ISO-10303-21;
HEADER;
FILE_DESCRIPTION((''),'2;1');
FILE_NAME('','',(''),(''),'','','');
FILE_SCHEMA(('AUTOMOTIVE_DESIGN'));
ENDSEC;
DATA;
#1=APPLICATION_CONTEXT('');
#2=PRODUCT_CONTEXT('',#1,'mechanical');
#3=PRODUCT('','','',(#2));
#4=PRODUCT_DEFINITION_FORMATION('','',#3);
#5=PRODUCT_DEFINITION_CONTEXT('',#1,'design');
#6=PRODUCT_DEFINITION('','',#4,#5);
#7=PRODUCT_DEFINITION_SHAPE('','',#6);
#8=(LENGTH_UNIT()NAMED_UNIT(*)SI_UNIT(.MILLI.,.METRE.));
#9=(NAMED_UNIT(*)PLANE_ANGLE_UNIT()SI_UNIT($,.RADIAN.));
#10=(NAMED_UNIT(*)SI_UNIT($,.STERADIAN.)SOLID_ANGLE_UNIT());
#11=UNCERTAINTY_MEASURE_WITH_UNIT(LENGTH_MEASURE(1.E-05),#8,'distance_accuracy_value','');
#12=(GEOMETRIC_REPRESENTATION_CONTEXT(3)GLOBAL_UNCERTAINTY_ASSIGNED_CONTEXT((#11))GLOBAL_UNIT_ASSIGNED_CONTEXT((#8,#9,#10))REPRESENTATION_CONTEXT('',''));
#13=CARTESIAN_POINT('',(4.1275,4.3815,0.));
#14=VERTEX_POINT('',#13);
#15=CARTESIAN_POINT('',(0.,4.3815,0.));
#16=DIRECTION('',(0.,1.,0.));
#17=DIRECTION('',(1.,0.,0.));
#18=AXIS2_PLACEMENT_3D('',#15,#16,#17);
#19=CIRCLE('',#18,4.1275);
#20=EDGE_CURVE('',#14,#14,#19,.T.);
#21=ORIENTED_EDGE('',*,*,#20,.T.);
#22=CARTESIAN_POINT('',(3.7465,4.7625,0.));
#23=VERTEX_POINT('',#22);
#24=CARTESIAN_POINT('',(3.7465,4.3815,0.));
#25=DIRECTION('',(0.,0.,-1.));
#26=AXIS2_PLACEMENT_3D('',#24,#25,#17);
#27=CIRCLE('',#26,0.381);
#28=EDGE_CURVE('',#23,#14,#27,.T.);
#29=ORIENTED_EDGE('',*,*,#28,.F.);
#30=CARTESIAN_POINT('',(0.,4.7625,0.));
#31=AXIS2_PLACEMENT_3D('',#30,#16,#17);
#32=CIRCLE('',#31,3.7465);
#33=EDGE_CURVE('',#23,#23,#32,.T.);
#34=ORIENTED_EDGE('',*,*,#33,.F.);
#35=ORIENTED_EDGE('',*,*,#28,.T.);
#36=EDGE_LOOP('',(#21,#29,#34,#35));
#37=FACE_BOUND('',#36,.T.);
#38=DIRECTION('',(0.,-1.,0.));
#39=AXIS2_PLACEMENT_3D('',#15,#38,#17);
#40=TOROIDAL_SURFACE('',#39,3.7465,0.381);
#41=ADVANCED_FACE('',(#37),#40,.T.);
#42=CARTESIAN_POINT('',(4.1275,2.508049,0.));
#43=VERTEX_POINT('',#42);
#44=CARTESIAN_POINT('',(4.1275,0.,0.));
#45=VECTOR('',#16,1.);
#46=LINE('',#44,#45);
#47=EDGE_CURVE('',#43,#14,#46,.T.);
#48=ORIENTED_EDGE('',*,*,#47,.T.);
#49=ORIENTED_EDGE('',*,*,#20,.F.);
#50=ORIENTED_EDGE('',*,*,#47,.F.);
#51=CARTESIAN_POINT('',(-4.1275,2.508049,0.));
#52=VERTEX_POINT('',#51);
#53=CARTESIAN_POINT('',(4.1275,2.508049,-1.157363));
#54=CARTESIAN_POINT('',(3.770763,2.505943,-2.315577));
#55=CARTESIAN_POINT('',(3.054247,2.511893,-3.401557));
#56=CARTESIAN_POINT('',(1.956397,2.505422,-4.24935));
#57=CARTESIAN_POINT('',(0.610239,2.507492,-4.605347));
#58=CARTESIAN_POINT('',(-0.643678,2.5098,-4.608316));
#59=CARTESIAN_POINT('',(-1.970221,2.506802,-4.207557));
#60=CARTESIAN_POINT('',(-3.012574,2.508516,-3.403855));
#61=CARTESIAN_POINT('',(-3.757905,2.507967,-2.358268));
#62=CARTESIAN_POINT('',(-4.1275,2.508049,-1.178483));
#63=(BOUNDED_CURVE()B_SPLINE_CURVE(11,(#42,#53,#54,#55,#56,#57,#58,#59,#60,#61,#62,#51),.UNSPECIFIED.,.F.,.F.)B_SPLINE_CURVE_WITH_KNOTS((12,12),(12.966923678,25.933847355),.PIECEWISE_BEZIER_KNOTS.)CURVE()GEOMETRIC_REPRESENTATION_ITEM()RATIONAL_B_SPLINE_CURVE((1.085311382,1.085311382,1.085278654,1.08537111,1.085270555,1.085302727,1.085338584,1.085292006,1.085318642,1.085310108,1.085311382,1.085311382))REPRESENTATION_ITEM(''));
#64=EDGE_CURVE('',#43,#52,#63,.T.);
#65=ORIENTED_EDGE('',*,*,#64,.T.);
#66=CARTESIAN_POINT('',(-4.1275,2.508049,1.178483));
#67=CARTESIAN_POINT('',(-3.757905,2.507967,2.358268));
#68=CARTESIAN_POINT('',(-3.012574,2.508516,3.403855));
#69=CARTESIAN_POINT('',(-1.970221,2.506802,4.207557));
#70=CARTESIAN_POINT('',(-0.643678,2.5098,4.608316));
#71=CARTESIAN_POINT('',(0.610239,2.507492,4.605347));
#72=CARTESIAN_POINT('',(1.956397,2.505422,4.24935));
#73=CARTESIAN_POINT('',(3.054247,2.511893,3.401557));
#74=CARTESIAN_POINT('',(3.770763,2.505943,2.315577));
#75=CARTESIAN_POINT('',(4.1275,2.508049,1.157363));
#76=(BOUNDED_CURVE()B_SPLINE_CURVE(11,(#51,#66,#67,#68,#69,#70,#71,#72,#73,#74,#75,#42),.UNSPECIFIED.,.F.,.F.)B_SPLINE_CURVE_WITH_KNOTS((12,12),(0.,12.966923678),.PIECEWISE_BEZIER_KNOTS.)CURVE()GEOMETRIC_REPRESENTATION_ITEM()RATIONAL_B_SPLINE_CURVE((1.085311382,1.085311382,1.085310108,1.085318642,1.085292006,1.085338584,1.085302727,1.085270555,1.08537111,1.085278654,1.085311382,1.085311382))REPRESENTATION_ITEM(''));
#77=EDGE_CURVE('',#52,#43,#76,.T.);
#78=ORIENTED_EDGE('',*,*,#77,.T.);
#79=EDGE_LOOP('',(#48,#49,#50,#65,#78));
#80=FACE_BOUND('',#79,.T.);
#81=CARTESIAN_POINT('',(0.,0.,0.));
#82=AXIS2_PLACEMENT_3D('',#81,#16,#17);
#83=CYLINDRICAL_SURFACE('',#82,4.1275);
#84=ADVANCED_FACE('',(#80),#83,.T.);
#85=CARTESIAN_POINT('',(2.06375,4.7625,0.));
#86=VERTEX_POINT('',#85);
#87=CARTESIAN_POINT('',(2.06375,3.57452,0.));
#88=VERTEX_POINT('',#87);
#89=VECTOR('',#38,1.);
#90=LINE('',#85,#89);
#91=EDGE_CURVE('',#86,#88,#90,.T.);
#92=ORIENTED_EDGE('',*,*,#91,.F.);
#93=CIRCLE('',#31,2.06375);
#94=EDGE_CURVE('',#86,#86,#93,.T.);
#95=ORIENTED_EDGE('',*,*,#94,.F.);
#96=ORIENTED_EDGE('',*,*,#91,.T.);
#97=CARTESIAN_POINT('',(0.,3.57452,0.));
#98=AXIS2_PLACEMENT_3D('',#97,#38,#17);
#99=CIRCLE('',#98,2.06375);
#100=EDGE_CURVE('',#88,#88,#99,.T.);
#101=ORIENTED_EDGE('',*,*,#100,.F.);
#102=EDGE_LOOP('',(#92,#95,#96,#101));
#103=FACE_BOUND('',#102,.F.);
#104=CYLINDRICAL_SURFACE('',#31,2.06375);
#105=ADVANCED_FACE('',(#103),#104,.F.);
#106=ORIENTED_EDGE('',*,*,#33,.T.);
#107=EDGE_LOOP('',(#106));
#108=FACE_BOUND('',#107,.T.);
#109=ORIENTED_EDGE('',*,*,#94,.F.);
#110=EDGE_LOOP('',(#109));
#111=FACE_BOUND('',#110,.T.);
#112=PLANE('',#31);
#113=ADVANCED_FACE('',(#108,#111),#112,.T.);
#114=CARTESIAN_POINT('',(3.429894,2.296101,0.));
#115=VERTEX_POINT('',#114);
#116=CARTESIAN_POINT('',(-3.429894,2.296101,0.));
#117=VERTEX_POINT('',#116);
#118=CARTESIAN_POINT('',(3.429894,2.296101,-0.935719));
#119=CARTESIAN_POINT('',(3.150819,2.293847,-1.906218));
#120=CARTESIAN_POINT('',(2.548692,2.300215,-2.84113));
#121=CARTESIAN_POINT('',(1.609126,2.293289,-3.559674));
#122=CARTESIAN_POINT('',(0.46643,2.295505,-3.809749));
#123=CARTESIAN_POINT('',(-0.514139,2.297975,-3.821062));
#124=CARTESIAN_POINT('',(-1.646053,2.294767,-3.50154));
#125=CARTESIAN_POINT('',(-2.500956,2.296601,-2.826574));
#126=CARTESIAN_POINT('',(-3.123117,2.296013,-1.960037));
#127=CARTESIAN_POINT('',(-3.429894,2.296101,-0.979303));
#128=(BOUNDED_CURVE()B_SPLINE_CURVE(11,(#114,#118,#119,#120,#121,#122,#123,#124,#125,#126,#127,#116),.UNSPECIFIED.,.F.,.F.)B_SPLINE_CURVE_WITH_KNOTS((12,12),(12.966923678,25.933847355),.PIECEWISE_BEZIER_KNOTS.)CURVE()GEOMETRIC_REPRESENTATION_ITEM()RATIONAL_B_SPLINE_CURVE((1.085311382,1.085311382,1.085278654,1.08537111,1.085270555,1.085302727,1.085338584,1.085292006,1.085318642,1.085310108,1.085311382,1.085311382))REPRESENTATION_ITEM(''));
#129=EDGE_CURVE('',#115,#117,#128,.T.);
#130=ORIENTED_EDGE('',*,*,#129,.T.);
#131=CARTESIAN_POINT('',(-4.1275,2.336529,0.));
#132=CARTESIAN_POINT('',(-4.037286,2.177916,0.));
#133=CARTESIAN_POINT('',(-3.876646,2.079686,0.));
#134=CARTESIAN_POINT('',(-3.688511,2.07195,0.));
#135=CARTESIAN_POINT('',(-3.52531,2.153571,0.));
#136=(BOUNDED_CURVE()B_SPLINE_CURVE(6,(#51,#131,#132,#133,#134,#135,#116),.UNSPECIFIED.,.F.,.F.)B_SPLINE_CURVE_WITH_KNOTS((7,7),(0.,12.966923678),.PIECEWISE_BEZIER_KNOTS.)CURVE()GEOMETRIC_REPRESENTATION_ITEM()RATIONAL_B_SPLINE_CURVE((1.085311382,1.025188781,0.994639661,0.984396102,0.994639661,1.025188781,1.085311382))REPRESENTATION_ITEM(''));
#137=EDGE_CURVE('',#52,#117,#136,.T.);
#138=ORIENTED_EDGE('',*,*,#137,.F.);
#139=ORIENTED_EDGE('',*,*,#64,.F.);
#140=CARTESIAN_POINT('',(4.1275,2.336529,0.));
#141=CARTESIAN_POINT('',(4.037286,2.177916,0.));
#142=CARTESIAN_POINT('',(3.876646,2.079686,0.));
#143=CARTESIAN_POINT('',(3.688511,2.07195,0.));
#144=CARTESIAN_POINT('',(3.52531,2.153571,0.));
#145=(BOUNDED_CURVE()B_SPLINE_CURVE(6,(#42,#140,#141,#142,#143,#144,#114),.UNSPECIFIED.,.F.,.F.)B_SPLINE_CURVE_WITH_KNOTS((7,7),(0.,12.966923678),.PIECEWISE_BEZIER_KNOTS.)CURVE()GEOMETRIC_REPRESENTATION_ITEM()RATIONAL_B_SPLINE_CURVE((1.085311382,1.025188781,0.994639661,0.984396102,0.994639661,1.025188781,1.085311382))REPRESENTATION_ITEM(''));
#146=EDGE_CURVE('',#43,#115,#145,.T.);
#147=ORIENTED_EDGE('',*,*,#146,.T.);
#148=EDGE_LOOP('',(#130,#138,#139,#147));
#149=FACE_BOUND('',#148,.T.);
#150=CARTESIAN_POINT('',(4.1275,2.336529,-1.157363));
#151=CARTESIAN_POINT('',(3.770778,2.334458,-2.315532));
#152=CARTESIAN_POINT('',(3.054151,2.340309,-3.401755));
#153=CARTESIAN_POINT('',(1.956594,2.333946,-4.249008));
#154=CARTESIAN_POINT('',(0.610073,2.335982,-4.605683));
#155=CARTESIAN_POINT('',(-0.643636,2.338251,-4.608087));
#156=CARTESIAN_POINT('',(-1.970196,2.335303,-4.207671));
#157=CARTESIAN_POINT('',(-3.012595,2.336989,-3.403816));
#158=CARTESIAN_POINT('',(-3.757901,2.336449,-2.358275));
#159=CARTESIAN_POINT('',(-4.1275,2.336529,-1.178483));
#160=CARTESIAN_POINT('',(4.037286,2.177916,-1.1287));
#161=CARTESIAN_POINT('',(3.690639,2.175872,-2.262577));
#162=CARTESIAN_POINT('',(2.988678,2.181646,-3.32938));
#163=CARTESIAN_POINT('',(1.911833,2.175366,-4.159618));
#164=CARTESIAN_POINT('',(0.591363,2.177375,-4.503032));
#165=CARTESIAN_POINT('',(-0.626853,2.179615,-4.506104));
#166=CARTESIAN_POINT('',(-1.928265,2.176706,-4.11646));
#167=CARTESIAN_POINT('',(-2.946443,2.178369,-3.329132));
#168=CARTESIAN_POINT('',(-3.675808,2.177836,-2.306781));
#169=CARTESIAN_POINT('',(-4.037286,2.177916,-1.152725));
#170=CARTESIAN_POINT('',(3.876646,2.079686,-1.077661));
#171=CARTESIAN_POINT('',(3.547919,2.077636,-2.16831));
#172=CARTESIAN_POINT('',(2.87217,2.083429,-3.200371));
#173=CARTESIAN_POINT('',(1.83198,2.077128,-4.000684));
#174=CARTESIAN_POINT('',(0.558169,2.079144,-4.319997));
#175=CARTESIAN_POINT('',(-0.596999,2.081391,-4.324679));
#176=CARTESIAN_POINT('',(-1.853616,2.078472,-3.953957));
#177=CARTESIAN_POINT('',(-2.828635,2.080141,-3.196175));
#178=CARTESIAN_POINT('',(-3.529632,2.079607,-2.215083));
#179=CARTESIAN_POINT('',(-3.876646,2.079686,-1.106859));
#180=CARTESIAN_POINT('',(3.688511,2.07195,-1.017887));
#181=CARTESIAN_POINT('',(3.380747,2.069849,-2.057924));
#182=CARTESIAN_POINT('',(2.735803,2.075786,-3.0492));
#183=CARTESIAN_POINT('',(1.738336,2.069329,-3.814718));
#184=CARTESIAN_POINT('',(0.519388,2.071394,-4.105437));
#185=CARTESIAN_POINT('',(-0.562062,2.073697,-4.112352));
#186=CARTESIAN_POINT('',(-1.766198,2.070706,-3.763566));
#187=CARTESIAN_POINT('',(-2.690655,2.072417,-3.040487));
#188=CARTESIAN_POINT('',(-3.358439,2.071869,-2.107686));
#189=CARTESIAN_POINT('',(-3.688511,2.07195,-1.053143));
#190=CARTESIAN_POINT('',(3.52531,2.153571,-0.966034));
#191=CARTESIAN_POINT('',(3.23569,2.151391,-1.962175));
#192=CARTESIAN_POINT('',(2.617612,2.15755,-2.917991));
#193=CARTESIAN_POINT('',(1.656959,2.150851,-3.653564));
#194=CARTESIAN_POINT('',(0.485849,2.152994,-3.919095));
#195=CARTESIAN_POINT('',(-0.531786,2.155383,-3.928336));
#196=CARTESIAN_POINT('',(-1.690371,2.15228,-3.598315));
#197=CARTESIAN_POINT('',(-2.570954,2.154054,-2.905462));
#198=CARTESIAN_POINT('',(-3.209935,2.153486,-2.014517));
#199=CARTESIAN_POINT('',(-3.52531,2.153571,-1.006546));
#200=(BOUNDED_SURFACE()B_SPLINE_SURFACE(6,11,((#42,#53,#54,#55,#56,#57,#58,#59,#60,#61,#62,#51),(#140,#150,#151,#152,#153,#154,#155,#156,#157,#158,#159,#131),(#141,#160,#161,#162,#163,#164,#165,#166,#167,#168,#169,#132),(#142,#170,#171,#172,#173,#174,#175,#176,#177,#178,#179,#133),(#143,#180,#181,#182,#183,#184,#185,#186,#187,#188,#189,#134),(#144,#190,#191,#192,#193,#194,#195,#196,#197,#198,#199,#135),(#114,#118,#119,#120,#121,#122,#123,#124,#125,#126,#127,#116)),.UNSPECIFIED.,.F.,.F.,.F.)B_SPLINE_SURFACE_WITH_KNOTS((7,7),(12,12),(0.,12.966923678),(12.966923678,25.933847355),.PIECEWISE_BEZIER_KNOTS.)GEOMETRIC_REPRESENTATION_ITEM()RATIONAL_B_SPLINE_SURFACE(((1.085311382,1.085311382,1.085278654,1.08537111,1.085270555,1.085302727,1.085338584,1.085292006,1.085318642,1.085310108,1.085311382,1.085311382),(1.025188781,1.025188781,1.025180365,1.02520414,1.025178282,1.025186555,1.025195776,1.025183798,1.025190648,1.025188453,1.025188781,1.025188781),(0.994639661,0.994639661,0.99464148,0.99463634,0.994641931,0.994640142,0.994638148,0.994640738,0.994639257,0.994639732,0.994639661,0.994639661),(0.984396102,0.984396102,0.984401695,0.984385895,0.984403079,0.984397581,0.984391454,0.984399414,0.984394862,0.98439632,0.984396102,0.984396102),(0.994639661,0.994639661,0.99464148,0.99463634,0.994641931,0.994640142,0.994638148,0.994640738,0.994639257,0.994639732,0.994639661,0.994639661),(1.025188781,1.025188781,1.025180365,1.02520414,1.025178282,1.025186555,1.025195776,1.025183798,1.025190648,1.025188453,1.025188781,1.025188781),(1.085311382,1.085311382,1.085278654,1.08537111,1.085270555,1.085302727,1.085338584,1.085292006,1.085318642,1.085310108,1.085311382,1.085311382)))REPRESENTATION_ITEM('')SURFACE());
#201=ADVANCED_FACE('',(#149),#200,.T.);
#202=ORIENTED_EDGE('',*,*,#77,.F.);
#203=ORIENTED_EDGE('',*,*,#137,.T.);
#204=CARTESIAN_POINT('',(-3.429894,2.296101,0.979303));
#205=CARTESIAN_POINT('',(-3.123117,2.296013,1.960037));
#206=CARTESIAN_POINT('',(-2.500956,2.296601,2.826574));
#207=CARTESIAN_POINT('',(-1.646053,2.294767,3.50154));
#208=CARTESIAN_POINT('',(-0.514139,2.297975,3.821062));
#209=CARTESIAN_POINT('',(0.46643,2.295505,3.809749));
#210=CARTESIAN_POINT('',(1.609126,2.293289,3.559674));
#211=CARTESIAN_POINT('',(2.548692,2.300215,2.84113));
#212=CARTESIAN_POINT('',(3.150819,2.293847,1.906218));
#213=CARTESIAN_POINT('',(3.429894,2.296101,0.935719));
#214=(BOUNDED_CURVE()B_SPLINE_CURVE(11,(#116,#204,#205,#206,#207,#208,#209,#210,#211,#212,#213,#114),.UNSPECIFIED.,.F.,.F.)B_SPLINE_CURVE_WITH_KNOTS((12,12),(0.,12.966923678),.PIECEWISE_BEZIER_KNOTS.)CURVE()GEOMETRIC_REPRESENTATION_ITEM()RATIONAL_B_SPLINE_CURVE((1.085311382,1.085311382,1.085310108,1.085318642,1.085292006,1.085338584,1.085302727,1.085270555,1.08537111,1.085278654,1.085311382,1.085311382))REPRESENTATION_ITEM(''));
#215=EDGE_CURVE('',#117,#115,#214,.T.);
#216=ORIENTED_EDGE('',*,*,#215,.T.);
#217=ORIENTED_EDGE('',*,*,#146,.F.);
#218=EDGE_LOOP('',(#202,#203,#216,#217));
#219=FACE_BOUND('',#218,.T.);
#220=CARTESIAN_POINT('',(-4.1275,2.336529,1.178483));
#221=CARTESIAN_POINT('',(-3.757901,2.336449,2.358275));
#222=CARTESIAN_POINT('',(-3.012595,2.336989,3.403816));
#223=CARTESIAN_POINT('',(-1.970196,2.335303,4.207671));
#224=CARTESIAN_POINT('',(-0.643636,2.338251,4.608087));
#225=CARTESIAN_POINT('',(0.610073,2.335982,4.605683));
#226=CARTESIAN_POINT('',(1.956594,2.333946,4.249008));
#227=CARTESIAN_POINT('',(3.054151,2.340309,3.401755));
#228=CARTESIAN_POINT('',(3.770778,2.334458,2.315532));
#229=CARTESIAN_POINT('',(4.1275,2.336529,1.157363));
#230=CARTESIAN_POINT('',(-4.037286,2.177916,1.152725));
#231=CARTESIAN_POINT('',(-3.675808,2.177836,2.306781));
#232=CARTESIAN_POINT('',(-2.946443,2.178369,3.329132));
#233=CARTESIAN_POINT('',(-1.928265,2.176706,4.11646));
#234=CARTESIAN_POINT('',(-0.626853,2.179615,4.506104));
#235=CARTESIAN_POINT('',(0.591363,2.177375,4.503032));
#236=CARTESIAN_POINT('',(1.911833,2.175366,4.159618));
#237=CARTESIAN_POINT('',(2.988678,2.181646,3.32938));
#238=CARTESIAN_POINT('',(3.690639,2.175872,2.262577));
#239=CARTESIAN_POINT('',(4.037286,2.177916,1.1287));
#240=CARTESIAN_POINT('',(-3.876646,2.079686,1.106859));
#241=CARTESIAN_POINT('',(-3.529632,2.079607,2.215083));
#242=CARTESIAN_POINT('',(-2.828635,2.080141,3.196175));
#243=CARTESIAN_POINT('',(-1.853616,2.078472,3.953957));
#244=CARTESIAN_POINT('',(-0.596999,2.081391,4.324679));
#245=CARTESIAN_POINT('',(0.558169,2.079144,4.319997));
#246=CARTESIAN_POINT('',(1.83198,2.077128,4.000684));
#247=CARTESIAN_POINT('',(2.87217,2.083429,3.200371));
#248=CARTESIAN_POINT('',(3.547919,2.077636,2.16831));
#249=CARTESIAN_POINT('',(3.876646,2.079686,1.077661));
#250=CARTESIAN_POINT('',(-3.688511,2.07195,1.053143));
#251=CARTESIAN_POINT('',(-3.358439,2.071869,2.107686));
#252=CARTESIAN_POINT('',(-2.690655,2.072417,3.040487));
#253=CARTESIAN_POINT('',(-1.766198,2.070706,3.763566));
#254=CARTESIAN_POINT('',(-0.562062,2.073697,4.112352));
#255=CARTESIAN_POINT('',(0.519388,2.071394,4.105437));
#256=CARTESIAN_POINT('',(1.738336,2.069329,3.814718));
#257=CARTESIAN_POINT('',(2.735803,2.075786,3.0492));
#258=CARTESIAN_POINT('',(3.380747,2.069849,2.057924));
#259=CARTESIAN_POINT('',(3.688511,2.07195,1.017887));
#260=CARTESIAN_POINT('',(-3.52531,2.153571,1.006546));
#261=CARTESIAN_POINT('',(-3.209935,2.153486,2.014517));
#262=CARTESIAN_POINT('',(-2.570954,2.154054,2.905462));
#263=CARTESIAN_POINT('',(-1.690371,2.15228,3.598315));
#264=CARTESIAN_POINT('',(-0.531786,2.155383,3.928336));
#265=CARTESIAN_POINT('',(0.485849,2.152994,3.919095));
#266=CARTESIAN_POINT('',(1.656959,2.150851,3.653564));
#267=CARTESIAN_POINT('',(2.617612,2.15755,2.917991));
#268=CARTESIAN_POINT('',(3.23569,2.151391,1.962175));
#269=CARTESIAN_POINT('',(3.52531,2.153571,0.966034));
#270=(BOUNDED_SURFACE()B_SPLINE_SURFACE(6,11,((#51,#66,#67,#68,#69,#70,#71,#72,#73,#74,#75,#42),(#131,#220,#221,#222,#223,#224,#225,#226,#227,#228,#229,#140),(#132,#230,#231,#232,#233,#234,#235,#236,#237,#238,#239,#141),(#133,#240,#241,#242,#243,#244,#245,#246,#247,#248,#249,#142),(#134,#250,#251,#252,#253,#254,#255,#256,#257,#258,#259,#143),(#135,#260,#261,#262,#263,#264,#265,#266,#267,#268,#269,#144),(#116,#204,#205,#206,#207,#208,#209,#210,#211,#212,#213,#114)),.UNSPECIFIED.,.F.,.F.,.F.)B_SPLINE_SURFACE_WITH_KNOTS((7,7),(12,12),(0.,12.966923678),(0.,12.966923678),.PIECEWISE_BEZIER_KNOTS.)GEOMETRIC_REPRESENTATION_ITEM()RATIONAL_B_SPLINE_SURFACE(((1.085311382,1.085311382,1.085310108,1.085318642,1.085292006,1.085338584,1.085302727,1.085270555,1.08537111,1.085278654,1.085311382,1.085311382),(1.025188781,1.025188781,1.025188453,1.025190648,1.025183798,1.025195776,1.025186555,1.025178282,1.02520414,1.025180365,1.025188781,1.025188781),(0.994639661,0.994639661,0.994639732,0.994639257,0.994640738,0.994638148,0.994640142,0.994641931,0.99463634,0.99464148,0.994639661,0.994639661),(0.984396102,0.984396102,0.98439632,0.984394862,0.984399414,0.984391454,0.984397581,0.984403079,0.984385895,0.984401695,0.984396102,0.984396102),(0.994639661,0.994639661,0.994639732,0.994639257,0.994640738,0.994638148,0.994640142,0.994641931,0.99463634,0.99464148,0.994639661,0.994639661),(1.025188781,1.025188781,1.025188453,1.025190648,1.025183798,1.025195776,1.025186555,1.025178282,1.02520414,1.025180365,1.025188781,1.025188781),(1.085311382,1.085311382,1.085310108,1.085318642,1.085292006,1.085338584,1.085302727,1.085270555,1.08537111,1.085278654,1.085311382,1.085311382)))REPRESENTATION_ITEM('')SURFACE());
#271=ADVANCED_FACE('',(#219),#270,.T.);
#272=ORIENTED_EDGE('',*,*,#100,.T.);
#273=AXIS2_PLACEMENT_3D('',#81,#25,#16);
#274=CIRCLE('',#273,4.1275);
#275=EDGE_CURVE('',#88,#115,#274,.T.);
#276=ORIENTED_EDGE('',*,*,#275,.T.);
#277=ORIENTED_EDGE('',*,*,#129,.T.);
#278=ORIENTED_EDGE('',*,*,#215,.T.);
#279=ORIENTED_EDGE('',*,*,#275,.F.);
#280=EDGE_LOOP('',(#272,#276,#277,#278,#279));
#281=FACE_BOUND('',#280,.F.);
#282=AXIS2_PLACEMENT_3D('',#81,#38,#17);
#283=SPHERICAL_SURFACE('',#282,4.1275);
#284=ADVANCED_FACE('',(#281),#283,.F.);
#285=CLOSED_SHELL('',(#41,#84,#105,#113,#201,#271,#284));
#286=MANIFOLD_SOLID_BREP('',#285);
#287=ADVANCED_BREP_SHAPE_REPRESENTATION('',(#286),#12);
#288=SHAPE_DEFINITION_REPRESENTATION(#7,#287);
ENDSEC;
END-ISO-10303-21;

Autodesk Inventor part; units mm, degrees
ref_plane "YZ Plane" through (0, 0, 0) normal (1, 0, 0) x (0, 1, 0)
ref_plane "XZ Plane" through (0, 0, 0) normal (0, 1, 0) x (-1, 0, 0)
ref_plane "XY Plane" through (0, 0, 0) normal (0, 0, 1) x (1, 0, 0)
sketch "Sketch1" plane through (0, 0, 0) normal (0, 0, 1) x (1, 0, 0)
  line L0 (0, -0.996467) -> (0, 5.9788) construction
  line L1 (-0.996467, 0) -> (5.9788, 0) construction
  line L2 (4.1275, 0) -> (4.1275, 4.7625)
  line L3 (4.1275, 4.7625) -> (0, 4.7625)
  line L4 (0, 4.7625) -> (0, 4.1275)
  arc A0 (4.1275, 0) -> (0, 4.1275) centre (0, 0) ccw
  point P0 (0, 0)
  dimension "d0" = 4.7625
  dimension "d1" = 4.1275
  dimension "d2" = 0.635
  dimension "d3" = 4.1275
sketch "Sketch1 outline for Revolution1" plane through (0, 0, 0) normal (0, 0, 1) x (1, 0, 0)
  arc A0 (0, 4.1275) -> (4.1275, 0) centre (0, 0) cw
  line L0 (0, 4.7625) -> (0, 4.1275)
  line L1 (4.1275, 4.7625) -> (0, 4.7625)
  line L2 (4.1275, 0) -> (4.1275, 4.7625)
revolve "Revolution1" add sketch "Sketch1 outline for Revolution1" angle 360 about axis through (0, -10, 0) along (0, 1, 0)
fillet "Fillet1" radius 0.381 2 edges at (-4.1275, 4.7625, 0) (-4.1275, 0, 0)
sketch "Sketch2" plane through (0, 4.7625, 0) normal (0, 1, 0) x (1, 0, 0)
  circle A0 centre (0, 0) radius 2.06375
  dimension "d6" = 4.1275
sketch "Sketch2 outline for Extrusion1" plane through (0, 4.7625, 0) normal (0, 1, 0) x (1, 0, 0)
  circle A0 centre (0, 0) radius 2.06375
extrude "Extrusion1" cut sketch "Sketch2 outline for Extrusion1" along normal through all both and the other way through all
properties part number "Pillow Ball Bushing"
